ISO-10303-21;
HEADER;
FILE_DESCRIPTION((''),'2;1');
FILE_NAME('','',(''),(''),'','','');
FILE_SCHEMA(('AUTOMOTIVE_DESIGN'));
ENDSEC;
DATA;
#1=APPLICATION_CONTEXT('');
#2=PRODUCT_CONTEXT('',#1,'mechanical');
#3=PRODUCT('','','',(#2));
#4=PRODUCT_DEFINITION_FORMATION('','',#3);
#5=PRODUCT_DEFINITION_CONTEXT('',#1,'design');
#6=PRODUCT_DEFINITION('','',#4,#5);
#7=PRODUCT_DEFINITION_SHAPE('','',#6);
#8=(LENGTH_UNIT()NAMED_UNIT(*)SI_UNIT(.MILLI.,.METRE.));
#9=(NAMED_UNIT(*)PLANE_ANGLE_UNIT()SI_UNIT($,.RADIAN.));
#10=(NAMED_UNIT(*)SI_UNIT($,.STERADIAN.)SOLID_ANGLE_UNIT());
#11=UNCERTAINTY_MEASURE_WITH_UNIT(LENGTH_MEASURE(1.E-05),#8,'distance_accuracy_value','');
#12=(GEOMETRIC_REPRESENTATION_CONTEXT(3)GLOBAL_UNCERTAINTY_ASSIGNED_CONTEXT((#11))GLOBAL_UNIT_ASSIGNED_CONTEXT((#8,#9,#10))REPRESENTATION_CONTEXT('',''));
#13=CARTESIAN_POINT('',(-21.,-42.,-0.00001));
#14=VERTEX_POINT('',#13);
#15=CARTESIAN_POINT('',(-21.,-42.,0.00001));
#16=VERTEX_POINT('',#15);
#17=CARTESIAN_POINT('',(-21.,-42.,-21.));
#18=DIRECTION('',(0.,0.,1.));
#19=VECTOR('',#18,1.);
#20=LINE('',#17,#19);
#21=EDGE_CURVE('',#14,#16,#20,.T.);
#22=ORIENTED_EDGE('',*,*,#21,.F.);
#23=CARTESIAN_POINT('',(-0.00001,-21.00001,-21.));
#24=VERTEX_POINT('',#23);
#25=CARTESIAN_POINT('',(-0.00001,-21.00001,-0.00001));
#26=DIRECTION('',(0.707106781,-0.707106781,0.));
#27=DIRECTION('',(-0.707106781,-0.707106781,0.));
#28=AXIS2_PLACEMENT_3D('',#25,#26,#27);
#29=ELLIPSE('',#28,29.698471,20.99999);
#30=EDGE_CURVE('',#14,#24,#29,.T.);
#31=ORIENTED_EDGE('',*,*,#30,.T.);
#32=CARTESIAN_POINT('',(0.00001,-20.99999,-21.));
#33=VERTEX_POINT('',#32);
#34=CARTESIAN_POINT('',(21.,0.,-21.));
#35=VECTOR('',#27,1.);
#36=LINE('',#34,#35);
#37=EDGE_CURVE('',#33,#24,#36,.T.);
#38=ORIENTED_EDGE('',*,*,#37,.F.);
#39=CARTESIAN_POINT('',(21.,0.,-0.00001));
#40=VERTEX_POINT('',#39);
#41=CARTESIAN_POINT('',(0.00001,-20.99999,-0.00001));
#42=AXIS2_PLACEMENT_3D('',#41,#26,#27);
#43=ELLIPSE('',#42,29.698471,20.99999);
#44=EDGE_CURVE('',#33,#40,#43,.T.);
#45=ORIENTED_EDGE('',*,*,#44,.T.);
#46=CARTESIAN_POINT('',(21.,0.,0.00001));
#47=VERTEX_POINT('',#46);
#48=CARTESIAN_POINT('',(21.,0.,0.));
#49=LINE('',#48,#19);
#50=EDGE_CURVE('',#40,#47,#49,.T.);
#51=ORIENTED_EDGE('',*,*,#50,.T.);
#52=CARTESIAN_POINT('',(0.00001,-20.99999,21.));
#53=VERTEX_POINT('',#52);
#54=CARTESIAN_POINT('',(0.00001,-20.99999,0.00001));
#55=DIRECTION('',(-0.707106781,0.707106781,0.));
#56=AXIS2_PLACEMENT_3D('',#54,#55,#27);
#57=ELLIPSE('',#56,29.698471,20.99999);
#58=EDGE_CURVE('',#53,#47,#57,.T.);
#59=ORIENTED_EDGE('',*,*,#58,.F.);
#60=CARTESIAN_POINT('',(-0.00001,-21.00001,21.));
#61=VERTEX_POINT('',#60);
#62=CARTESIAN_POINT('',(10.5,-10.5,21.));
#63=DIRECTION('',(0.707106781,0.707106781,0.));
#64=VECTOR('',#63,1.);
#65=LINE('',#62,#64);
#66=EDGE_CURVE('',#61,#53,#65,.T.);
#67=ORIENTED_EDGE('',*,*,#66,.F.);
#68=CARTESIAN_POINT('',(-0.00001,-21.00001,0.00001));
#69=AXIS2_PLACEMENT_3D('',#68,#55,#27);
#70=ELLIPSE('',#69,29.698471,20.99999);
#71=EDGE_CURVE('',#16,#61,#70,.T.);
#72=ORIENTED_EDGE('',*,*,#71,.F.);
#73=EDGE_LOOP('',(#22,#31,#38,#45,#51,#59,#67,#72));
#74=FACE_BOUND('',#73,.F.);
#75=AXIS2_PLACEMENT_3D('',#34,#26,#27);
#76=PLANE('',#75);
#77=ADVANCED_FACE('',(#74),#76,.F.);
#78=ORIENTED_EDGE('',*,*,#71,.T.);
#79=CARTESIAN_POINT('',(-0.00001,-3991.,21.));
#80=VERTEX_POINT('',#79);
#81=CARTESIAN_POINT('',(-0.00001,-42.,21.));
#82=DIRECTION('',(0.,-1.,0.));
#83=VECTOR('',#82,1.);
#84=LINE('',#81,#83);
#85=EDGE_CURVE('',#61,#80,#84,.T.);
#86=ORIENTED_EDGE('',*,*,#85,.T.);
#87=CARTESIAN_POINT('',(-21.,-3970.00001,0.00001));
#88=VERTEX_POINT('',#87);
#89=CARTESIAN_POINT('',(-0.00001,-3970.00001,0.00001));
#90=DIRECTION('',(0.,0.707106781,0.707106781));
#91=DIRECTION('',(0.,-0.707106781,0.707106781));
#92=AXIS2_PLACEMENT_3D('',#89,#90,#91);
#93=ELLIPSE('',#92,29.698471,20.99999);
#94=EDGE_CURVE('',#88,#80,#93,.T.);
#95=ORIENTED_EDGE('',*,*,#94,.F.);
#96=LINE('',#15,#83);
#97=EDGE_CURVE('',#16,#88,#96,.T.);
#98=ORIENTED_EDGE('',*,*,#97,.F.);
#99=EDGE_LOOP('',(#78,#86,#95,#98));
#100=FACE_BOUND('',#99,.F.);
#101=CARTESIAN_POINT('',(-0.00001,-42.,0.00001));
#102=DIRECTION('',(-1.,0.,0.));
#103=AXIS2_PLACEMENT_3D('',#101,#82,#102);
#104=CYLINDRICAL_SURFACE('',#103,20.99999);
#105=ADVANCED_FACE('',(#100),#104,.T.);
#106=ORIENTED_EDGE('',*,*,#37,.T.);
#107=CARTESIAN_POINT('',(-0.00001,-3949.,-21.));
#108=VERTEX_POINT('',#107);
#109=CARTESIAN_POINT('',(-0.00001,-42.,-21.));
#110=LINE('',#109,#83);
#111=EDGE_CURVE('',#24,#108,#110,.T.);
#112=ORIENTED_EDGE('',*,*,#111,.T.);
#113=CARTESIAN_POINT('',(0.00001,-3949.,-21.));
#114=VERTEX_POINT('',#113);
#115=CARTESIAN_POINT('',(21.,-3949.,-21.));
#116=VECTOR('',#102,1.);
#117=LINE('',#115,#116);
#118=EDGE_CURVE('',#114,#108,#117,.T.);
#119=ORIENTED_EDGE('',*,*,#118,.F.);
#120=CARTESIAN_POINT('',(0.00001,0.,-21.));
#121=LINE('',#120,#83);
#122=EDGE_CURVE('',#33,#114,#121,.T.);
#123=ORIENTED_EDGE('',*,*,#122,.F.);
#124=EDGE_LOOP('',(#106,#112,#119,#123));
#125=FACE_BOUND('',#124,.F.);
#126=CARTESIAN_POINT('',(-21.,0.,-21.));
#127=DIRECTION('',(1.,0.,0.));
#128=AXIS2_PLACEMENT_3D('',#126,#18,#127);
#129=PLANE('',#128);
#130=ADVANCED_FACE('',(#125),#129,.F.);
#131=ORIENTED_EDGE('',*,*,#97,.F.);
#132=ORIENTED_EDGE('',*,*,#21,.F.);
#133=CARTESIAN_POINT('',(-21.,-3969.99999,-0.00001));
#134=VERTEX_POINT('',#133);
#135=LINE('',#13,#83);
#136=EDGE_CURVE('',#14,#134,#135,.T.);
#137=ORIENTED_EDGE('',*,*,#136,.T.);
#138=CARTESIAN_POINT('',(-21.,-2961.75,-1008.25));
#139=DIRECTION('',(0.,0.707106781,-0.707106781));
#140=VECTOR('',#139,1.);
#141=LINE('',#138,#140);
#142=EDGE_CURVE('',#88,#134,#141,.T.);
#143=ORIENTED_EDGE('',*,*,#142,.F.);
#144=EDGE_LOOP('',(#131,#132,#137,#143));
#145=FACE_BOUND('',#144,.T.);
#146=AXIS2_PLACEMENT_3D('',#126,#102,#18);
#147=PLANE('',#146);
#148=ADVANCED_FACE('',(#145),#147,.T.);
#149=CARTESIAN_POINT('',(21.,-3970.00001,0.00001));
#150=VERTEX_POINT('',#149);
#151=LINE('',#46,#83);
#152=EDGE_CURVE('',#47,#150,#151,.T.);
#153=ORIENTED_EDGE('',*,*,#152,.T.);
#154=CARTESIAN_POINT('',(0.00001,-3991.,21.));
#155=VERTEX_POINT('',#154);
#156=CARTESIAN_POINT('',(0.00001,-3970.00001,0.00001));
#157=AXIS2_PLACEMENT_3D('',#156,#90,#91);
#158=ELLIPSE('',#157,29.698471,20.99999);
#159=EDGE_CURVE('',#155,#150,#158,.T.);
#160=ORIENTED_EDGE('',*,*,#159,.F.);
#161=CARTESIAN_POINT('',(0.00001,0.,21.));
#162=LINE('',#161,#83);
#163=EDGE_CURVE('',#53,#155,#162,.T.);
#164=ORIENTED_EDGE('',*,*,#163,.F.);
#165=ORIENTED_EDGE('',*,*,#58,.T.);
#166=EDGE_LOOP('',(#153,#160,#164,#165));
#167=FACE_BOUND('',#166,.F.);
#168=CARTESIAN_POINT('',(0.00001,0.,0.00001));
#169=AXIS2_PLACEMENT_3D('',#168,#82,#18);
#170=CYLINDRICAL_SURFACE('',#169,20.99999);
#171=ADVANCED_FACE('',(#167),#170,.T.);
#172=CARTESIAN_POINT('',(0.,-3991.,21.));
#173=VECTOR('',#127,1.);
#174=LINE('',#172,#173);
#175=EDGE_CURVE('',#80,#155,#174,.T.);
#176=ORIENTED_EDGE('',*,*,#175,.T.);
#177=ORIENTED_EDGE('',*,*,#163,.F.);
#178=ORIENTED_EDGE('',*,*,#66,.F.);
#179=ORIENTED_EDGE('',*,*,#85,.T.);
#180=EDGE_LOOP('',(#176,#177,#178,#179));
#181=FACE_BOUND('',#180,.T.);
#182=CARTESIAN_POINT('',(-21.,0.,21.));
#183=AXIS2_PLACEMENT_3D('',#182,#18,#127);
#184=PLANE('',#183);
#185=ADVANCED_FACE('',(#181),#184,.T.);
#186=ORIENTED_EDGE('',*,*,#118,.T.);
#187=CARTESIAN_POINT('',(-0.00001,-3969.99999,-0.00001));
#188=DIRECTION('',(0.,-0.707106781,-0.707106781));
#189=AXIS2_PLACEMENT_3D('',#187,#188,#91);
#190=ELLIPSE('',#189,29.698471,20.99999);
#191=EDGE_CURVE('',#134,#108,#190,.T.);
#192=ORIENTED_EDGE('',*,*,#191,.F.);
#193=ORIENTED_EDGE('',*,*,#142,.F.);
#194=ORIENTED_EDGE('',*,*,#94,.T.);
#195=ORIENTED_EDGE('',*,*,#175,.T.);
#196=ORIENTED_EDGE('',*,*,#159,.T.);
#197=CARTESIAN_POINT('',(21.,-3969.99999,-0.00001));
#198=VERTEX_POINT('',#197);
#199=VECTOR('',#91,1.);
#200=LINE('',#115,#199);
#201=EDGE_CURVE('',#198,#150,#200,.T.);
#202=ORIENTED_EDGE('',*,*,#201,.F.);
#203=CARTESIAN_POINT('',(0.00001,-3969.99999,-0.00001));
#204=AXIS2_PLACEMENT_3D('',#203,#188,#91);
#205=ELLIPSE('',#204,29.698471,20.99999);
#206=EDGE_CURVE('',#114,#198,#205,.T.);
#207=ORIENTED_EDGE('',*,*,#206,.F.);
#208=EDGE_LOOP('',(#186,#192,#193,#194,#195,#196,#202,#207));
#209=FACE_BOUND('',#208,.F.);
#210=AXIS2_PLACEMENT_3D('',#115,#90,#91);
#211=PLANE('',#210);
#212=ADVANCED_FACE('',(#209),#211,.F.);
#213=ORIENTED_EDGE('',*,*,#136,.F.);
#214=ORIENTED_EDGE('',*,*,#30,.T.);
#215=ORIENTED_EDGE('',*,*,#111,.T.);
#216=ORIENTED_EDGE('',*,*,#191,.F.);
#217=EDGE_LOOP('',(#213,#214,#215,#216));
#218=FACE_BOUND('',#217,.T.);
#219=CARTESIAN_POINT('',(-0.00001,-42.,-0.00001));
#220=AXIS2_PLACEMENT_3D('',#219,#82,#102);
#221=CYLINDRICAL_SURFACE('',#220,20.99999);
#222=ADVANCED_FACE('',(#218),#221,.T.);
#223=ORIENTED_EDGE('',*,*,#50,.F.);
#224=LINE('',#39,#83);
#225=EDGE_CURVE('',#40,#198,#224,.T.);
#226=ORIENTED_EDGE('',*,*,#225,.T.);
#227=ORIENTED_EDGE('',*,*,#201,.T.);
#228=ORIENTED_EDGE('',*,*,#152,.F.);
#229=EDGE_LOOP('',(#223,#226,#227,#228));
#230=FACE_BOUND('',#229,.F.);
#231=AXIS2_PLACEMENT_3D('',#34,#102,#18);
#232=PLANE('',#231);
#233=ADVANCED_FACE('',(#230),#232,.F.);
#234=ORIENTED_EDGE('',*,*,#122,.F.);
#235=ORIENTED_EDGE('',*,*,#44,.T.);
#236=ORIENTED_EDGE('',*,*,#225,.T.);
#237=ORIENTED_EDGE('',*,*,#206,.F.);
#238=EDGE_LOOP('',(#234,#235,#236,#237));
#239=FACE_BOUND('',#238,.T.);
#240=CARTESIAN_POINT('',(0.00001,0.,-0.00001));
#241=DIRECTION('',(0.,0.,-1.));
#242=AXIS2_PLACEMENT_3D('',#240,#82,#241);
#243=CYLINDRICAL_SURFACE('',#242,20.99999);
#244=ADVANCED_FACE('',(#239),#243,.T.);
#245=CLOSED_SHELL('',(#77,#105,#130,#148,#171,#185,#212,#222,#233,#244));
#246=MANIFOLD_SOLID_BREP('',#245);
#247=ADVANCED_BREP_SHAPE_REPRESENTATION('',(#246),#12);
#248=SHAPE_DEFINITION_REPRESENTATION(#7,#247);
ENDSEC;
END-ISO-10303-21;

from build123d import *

# Parameters (mm, degrees)
F0_W     = 42
F0_H     = 42
F1_DEPTH = 3991
F3_DEPTH = 100
F5_DEPTH = 100
F6_R     = 20.99999


# Not quite as in the source:
# - a fillet or chamfer is up to 0.001 mm smaller than in the source, because OpenCascade refuses the exact size


with BuildPart() as f1:
    # F0 (on Front) → F1 (new body)
    with BuildSketch(Plane.XZ):
        Rectangle(F0_W, F0_H)
    extrude(amount=F1_DEPTH)

    # F2 (on face) → F3 (cut)
    with BuildSketch(Plane.YZ.offset(21)):
        Polygon((-3949, -21), (-3991, 21), (-3991, -21), align=None)
    extrude(amount=-F3_DEPTH, mode=Mode.SUBTRACT)

    # F4 (on face) → F5 (cut)
    with BuildSketch(Plane(origin=(0, 0, -21), x_dir=(1, 0, 0), z_dir=(0, 0, -1))):
        Polygon((-21, 0), (21, 0), (-21, 42), align=None)
    extrude(amount=-F5_DEPTH, mode=Mode.SUBTRACT)

    # F6 (radius 21 in the source; OpenCascade refuses exactly that, so slightly less here)
    f6_edges = [f1.edges().sort_by_distance(p)[0] for p in [
        (-21, -1995.5, -21),
        (21, -1974.5, -21),
        (21, -1995.5, 21),
        (-21, -2016.5, 21),
    ]]
    fillet(f6_edges, radius=F6_R)


solid = f1.part
